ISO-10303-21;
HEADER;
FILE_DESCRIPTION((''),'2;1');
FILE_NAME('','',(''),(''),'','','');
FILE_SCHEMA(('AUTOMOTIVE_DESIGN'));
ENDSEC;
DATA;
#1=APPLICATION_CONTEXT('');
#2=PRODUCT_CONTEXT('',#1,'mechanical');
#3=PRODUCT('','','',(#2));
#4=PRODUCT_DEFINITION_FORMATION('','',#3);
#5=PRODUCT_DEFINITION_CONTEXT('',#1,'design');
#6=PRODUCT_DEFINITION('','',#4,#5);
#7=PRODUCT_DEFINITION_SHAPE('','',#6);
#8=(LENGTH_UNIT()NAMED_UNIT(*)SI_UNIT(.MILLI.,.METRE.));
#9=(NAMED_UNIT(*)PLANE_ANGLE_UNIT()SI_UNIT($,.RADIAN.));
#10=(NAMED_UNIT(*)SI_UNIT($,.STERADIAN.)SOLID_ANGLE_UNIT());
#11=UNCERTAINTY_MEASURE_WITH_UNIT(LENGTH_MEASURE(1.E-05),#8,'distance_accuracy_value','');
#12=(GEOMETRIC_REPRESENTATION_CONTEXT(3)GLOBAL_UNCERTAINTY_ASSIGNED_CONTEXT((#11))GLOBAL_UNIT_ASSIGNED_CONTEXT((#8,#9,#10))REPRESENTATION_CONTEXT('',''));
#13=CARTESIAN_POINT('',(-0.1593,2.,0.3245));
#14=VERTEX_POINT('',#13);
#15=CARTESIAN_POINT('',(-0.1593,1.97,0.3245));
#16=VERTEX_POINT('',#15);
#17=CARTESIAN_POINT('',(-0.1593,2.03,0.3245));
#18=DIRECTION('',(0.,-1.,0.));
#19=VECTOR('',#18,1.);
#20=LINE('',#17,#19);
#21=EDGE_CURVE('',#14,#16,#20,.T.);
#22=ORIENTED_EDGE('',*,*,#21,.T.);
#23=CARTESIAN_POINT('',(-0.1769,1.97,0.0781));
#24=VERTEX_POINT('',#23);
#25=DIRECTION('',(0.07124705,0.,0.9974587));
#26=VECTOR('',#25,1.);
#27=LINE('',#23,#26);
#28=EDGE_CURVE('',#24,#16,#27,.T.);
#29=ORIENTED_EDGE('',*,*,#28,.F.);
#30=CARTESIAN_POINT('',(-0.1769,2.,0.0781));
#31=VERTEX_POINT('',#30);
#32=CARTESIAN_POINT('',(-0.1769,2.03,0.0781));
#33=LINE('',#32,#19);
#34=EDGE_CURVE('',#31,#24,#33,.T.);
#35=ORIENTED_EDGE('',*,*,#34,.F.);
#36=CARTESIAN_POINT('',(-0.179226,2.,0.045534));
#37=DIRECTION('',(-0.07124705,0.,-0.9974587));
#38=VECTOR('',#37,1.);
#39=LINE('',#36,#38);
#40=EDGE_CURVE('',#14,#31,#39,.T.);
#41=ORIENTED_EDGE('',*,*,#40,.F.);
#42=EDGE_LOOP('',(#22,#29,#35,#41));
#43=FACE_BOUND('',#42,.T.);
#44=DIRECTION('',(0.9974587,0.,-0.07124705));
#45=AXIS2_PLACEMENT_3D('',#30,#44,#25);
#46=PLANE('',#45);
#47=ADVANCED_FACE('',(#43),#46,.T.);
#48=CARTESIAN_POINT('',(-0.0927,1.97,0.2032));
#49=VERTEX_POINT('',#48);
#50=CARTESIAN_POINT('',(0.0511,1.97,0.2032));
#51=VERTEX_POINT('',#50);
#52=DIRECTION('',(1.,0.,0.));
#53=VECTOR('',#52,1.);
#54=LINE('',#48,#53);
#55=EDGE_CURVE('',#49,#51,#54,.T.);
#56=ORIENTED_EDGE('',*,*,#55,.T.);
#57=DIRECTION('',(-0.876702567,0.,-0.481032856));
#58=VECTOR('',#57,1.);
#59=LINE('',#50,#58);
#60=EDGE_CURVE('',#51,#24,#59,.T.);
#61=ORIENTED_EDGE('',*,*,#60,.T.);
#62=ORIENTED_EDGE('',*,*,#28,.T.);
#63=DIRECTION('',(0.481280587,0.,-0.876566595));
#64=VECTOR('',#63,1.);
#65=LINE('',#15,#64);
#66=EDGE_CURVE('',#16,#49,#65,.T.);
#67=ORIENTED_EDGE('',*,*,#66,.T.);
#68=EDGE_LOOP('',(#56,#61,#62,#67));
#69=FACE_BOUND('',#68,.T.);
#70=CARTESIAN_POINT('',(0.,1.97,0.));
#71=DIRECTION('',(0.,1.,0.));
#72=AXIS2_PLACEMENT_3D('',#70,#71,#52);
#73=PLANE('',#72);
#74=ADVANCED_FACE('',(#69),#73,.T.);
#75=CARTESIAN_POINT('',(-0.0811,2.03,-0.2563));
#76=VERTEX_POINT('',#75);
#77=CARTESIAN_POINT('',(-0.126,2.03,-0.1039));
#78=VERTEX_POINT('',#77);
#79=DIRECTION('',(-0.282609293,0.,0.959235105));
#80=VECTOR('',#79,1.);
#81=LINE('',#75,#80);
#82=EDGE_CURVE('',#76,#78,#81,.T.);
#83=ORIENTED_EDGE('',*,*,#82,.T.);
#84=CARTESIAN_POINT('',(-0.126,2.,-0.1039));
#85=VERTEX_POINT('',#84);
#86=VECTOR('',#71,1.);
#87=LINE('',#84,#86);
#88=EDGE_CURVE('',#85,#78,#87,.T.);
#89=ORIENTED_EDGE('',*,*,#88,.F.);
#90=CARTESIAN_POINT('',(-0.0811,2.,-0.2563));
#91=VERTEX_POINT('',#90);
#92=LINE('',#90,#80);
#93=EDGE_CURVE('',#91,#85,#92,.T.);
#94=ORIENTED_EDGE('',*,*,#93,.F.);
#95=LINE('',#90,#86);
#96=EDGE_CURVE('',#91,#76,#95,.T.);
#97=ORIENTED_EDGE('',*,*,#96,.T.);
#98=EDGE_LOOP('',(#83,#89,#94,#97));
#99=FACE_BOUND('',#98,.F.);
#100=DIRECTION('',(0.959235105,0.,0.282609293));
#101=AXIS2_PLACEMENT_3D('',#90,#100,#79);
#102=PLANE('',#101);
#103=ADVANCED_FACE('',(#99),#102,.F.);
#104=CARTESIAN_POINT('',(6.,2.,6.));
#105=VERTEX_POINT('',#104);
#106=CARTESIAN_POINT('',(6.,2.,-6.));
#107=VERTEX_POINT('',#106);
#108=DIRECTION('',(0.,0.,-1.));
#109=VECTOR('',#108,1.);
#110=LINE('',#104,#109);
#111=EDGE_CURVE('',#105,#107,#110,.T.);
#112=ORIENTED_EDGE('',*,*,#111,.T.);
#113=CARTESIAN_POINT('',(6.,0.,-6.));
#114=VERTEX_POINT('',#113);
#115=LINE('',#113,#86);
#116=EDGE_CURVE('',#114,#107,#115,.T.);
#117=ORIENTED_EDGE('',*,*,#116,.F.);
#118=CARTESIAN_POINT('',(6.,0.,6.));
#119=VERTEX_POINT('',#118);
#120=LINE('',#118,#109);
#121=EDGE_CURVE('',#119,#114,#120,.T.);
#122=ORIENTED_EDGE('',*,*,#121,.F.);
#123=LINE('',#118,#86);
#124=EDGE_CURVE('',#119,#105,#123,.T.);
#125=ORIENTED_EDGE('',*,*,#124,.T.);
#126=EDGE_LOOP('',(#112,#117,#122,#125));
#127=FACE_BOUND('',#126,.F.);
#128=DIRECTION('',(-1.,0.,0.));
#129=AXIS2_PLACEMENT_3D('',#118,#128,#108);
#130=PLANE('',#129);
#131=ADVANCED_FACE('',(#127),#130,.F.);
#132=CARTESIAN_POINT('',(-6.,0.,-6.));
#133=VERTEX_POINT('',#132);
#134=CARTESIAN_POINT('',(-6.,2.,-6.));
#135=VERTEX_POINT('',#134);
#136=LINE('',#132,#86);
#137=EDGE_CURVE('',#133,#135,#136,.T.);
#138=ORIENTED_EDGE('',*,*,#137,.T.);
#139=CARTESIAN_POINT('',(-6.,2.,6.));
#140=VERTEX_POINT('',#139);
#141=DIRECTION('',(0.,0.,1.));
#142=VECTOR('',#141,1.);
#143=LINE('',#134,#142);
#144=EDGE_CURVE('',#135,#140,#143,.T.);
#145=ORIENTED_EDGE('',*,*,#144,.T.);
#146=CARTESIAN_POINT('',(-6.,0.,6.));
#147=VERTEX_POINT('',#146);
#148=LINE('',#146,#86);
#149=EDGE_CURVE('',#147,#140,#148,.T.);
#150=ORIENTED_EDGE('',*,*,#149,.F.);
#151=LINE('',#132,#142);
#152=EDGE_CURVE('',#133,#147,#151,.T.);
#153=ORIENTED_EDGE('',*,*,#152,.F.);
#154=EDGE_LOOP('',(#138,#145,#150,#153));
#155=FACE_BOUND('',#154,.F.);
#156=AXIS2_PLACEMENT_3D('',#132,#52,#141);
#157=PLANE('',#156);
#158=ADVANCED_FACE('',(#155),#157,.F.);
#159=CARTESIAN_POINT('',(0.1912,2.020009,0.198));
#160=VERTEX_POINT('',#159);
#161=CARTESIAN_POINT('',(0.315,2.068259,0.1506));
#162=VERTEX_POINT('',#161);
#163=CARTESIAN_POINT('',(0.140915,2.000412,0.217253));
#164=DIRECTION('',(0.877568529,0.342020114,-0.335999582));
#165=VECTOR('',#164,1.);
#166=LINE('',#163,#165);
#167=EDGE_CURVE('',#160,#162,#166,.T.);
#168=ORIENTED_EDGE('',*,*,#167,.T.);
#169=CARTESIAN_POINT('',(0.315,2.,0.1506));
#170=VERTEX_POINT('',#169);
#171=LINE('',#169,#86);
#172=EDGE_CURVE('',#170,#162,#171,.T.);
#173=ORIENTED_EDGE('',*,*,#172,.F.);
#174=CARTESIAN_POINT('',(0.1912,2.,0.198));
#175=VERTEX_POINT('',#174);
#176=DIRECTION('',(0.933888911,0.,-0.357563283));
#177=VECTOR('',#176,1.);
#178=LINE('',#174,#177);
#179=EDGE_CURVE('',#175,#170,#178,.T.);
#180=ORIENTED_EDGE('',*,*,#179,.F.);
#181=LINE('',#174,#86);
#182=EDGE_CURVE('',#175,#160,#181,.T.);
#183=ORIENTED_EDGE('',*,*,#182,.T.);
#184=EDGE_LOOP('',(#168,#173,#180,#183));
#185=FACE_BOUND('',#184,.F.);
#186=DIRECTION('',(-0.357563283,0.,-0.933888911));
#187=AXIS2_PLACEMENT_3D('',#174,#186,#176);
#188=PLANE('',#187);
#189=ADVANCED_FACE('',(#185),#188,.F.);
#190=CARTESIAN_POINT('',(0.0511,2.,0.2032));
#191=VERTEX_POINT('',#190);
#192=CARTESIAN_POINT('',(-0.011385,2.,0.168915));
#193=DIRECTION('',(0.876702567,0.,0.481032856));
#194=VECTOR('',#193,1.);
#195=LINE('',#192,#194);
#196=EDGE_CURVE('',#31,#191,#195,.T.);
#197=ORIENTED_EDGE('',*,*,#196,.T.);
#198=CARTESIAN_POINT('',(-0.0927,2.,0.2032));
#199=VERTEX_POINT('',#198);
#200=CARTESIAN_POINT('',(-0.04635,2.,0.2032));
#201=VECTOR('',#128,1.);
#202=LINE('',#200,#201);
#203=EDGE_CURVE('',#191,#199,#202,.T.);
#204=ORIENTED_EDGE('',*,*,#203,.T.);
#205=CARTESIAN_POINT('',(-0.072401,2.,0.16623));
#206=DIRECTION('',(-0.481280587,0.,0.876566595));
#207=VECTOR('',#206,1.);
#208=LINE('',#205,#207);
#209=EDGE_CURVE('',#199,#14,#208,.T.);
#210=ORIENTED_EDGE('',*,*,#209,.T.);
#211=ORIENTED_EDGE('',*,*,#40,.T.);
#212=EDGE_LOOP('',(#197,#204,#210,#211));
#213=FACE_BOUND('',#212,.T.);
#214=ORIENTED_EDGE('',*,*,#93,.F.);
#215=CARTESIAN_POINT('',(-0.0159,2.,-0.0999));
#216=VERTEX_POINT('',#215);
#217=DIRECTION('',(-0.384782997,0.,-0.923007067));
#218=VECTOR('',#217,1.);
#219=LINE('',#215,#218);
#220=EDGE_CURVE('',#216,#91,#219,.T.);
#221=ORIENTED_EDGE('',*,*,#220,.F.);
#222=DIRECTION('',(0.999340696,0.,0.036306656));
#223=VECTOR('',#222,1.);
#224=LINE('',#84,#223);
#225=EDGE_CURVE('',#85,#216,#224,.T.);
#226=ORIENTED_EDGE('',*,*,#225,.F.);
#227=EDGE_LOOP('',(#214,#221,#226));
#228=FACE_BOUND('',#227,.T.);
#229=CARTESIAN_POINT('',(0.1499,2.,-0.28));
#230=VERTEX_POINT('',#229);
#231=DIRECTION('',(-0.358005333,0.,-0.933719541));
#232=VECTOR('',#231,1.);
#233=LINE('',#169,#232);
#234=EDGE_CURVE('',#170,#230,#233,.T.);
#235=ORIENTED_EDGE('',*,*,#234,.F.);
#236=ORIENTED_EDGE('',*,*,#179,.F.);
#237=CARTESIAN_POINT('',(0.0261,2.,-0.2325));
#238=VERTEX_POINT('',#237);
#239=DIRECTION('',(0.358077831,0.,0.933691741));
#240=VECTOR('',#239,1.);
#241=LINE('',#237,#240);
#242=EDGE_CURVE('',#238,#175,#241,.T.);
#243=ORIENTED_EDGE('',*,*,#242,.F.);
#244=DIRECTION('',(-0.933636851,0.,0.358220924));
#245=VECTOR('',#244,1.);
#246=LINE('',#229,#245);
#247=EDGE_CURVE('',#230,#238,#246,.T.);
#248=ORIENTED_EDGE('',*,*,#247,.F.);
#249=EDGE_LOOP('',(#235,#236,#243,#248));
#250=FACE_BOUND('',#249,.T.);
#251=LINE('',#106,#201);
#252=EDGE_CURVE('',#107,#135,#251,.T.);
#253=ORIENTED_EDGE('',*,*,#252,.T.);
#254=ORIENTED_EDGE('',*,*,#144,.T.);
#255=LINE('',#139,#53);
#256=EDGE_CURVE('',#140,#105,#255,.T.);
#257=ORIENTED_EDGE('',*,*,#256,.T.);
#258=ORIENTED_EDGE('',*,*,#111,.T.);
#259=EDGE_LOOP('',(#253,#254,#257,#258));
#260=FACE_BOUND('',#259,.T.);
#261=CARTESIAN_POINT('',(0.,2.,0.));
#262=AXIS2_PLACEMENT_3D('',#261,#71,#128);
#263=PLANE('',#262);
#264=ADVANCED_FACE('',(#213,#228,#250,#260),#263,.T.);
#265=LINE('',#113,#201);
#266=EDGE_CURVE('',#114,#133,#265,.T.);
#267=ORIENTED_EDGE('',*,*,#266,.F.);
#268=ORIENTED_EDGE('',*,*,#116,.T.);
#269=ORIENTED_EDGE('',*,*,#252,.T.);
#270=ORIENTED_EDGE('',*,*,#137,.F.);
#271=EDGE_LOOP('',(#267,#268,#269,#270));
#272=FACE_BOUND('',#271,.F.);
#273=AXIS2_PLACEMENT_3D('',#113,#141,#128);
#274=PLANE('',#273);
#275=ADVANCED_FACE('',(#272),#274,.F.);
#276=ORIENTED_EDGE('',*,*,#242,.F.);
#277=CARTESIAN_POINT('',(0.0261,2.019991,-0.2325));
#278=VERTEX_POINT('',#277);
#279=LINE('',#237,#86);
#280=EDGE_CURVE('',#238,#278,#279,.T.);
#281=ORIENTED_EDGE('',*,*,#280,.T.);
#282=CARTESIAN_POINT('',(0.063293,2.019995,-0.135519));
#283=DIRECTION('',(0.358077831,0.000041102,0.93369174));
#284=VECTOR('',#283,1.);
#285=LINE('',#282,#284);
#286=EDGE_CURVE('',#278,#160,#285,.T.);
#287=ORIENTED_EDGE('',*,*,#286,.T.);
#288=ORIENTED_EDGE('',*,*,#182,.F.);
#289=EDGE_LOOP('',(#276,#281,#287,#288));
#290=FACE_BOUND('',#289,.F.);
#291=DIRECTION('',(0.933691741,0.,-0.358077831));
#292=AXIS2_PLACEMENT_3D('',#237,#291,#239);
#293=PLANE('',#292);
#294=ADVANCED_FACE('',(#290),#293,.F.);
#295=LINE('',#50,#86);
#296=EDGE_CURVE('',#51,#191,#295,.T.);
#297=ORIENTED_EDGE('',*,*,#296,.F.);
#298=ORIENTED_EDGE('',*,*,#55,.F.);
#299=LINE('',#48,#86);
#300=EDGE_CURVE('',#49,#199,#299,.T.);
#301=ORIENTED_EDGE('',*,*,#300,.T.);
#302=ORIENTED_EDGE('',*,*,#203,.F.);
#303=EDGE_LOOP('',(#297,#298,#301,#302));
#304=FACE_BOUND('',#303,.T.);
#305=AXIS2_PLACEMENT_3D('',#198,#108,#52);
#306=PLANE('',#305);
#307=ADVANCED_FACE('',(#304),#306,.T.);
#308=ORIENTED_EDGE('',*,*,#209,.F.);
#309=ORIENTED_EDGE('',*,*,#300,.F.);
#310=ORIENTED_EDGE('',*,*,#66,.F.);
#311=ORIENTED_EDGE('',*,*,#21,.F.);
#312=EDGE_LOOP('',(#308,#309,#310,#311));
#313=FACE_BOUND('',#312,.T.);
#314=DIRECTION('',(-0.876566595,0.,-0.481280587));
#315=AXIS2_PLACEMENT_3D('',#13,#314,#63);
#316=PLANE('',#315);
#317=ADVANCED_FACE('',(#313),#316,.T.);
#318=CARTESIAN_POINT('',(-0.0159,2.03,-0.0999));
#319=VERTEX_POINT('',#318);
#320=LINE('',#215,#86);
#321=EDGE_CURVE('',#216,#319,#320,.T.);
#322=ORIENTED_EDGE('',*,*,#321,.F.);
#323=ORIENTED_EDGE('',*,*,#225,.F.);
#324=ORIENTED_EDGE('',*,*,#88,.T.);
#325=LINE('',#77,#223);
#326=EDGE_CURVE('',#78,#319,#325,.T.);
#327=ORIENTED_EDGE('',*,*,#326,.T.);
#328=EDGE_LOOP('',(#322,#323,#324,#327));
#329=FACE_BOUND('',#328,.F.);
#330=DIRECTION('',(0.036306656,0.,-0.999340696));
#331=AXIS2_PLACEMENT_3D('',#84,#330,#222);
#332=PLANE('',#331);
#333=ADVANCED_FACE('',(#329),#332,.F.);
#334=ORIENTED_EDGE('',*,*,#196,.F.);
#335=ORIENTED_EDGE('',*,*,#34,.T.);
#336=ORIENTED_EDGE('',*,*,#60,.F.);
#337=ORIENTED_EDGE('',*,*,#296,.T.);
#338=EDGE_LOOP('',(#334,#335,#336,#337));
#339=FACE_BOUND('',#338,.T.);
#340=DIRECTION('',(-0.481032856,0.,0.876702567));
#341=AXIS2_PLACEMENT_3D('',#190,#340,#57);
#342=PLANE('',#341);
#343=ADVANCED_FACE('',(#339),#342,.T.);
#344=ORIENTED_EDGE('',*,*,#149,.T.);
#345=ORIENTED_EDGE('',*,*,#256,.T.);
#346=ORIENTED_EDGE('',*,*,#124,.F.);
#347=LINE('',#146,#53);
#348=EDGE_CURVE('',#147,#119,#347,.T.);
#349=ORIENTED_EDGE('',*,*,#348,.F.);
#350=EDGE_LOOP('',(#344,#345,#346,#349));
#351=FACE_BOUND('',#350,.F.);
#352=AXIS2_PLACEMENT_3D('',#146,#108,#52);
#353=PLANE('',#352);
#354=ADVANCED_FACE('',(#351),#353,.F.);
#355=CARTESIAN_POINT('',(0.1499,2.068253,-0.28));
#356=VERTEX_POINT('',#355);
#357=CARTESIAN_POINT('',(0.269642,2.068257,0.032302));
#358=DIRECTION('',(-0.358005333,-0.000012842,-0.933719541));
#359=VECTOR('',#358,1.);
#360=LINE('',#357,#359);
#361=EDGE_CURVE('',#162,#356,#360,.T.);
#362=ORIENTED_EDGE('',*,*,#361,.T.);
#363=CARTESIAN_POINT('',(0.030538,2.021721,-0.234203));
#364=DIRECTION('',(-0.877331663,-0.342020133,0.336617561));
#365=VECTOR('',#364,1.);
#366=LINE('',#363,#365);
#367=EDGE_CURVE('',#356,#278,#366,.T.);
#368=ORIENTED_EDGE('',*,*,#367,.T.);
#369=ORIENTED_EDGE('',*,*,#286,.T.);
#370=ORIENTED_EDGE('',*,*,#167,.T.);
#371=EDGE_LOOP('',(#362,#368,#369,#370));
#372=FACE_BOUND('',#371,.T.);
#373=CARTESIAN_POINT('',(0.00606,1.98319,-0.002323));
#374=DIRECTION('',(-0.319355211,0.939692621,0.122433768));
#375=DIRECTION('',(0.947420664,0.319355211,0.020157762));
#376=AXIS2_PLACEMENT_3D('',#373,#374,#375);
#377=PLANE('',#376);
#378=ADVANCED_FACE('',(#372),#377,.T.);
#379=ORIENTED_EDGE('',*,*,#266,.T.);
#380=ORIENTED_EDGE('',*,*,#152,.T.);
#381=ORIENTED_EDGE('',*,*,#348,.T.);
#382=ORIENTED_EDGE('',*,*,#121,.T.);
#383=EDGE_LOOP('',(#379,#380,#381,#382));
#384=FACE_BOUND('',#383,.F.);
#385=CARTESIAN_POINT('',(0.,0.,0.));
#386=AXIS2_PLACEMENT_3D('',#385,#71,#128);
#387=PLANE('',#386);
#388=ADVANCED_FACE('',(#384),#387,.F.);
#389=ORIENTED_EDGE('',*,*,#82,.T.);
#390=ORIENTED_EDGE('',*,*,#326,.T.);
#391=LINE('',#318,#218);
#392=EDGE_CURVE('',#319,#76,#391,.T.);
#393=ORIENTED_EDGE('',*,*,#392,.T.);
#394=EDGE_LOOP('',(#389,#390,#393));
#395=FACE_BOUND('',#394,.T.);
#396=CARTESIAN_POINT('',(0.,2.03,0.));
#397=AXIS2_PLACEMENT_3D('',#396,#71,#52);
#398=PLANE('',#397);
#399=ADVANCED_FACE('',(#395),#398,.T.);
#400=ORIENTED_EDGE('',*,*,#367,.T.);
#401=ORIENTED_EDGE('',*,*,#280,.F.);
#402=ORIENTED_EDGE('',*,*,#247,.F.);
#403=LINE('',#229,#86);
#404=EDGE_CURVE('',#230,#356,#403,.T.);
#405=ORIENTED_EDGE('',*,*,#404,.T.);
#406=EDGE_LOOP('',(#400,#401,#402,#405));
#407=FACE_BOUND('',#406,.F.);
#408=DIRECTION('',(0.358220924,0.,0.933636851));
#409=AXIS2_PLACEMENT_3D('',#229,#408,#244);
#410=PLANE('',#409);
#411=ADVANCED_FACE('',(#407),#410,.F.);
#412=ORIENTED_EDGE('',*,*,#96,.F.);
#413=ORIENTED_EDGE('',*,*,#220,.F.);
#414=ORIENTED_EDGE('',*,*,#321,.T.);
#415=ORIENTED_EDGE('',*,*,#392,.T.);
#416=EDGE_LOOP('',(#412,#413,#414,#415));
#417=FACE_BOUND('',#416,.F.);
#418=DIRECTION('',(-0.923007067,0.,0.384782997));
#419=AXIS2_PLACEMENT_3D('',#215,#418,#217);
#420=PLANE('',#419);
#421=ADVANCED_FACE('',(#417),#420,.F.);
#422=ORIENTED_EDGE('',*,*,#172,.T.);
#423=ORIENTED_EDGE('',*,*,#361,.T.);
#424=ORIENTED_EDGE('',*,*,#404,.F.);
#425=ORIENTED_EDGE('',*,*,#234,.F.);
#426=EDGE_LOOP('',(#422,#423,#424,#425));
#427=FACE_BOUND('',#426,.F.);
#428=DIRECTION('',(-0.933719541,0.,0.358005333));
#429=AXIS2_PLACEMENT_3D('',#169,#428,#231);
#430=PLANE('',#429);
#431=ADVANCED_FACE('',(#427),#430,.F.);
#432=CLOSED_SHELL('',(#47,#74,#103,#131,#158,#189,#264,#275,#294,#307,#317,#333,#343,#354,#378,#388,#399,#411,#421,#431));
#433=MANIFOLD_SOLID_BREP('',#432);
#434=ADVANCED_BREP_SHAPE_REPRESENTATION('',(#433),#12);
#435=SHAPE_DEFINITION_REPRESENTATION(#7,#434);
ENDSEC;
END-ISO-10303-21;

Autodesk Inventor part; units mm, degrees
ref_plane "YZ Plane" through (0, 0, 0) normal (1, 0, 0) x (0, 1, 0)
ref_plane "XZ Plane" through (0, 0, 0) normal (0, 1, 0) x (-1, 0, 0)
ref_plane "XY Plane" through (0, 0, 0) normal (0, 0, 1) x (1, 0, 0)
sketch "Sketch1" plane through (0, 0, 0) normal (0, 1, 0) x (-1, 0, 0)
  line L0 (6, 6) -> (-6, 6)
  line L1 (-6, 6) -> (-6, -6)
  line L2 (-6, -6) -> (6, -6)
  line L3 (6, -6) -> (6, 6)
  line L4 (6, 6) -> (-6, -6) construction
  line L5 (-6, 6) -> (6, -6) construction
  point P0 (0, 0)
  dimension "d0" = 12
  dimension "d1" = 12
extrude "Extrusion1" add sketch "Sketch1" along normal blind 2
sketch "Sketch2" plane through (0, 2, 0) normal (0, 1, 0) x (1, 0, 0)
  line L0 (-0.0927, -0.2032) -> (0.0511, -0.2032)
  line L1 (0.0511, -0.2032) -> (-0.1769, -0.0781)
  line L2 (-0.1769, -0.0781) -> (-0.1593, -0.3245)
  line L3 (-0.1593, -0.3245) -> (-0.0927, -0.2032)
  line L4 (-0.0811, 0.2563) -> (-0.126, 0.1039)
  line L5 (-0.126, 0.1039) -> (-0.0159, 0.0999)
  line L6 (-0.0159, 0.0999) -> (-0.0811, 0.2563)
  line L7 (0.315, -0.1506) -> (0.1499, 0.28)
  line L8 (0.1499, 0.28) -> (0.0261, 0.2325)
  line L9 (0.0261, 0.2325) -> (0.1912, -0.198)
  line L10 (0.1912, -0.198) -> (0.315, -0.1506)
  line L11 (0.315, -0.1506) -> (0.0261, 0.2325) construction
  line L12 (0.1499, 0.28) -> (0.1912, -0.198) construction
  point P0 (0, 0)
  point P1 (0.1705, 0.041)
extrude "Extrusion2" cut sketch "Sketch2" along normal mid plane 0.06 contours L3 L2 L1 L0
extrude "Extrusion3" add sketch "Sketch2" along normal blind 0.03 contours L6 L5 L4
extrude "Extrusion4" add sketch "Sketch2" along normal blind 0.02 contours L10 L9 L8 L7
draft "FaceDraft1" angle 20 pull direction (-0.9337322, 0, 0.3579724) faces at (0.2187, 2.02, 0.0229) fixed edges at (0.1086, 2.02, -0.0173)
properties part number "example_sample"
